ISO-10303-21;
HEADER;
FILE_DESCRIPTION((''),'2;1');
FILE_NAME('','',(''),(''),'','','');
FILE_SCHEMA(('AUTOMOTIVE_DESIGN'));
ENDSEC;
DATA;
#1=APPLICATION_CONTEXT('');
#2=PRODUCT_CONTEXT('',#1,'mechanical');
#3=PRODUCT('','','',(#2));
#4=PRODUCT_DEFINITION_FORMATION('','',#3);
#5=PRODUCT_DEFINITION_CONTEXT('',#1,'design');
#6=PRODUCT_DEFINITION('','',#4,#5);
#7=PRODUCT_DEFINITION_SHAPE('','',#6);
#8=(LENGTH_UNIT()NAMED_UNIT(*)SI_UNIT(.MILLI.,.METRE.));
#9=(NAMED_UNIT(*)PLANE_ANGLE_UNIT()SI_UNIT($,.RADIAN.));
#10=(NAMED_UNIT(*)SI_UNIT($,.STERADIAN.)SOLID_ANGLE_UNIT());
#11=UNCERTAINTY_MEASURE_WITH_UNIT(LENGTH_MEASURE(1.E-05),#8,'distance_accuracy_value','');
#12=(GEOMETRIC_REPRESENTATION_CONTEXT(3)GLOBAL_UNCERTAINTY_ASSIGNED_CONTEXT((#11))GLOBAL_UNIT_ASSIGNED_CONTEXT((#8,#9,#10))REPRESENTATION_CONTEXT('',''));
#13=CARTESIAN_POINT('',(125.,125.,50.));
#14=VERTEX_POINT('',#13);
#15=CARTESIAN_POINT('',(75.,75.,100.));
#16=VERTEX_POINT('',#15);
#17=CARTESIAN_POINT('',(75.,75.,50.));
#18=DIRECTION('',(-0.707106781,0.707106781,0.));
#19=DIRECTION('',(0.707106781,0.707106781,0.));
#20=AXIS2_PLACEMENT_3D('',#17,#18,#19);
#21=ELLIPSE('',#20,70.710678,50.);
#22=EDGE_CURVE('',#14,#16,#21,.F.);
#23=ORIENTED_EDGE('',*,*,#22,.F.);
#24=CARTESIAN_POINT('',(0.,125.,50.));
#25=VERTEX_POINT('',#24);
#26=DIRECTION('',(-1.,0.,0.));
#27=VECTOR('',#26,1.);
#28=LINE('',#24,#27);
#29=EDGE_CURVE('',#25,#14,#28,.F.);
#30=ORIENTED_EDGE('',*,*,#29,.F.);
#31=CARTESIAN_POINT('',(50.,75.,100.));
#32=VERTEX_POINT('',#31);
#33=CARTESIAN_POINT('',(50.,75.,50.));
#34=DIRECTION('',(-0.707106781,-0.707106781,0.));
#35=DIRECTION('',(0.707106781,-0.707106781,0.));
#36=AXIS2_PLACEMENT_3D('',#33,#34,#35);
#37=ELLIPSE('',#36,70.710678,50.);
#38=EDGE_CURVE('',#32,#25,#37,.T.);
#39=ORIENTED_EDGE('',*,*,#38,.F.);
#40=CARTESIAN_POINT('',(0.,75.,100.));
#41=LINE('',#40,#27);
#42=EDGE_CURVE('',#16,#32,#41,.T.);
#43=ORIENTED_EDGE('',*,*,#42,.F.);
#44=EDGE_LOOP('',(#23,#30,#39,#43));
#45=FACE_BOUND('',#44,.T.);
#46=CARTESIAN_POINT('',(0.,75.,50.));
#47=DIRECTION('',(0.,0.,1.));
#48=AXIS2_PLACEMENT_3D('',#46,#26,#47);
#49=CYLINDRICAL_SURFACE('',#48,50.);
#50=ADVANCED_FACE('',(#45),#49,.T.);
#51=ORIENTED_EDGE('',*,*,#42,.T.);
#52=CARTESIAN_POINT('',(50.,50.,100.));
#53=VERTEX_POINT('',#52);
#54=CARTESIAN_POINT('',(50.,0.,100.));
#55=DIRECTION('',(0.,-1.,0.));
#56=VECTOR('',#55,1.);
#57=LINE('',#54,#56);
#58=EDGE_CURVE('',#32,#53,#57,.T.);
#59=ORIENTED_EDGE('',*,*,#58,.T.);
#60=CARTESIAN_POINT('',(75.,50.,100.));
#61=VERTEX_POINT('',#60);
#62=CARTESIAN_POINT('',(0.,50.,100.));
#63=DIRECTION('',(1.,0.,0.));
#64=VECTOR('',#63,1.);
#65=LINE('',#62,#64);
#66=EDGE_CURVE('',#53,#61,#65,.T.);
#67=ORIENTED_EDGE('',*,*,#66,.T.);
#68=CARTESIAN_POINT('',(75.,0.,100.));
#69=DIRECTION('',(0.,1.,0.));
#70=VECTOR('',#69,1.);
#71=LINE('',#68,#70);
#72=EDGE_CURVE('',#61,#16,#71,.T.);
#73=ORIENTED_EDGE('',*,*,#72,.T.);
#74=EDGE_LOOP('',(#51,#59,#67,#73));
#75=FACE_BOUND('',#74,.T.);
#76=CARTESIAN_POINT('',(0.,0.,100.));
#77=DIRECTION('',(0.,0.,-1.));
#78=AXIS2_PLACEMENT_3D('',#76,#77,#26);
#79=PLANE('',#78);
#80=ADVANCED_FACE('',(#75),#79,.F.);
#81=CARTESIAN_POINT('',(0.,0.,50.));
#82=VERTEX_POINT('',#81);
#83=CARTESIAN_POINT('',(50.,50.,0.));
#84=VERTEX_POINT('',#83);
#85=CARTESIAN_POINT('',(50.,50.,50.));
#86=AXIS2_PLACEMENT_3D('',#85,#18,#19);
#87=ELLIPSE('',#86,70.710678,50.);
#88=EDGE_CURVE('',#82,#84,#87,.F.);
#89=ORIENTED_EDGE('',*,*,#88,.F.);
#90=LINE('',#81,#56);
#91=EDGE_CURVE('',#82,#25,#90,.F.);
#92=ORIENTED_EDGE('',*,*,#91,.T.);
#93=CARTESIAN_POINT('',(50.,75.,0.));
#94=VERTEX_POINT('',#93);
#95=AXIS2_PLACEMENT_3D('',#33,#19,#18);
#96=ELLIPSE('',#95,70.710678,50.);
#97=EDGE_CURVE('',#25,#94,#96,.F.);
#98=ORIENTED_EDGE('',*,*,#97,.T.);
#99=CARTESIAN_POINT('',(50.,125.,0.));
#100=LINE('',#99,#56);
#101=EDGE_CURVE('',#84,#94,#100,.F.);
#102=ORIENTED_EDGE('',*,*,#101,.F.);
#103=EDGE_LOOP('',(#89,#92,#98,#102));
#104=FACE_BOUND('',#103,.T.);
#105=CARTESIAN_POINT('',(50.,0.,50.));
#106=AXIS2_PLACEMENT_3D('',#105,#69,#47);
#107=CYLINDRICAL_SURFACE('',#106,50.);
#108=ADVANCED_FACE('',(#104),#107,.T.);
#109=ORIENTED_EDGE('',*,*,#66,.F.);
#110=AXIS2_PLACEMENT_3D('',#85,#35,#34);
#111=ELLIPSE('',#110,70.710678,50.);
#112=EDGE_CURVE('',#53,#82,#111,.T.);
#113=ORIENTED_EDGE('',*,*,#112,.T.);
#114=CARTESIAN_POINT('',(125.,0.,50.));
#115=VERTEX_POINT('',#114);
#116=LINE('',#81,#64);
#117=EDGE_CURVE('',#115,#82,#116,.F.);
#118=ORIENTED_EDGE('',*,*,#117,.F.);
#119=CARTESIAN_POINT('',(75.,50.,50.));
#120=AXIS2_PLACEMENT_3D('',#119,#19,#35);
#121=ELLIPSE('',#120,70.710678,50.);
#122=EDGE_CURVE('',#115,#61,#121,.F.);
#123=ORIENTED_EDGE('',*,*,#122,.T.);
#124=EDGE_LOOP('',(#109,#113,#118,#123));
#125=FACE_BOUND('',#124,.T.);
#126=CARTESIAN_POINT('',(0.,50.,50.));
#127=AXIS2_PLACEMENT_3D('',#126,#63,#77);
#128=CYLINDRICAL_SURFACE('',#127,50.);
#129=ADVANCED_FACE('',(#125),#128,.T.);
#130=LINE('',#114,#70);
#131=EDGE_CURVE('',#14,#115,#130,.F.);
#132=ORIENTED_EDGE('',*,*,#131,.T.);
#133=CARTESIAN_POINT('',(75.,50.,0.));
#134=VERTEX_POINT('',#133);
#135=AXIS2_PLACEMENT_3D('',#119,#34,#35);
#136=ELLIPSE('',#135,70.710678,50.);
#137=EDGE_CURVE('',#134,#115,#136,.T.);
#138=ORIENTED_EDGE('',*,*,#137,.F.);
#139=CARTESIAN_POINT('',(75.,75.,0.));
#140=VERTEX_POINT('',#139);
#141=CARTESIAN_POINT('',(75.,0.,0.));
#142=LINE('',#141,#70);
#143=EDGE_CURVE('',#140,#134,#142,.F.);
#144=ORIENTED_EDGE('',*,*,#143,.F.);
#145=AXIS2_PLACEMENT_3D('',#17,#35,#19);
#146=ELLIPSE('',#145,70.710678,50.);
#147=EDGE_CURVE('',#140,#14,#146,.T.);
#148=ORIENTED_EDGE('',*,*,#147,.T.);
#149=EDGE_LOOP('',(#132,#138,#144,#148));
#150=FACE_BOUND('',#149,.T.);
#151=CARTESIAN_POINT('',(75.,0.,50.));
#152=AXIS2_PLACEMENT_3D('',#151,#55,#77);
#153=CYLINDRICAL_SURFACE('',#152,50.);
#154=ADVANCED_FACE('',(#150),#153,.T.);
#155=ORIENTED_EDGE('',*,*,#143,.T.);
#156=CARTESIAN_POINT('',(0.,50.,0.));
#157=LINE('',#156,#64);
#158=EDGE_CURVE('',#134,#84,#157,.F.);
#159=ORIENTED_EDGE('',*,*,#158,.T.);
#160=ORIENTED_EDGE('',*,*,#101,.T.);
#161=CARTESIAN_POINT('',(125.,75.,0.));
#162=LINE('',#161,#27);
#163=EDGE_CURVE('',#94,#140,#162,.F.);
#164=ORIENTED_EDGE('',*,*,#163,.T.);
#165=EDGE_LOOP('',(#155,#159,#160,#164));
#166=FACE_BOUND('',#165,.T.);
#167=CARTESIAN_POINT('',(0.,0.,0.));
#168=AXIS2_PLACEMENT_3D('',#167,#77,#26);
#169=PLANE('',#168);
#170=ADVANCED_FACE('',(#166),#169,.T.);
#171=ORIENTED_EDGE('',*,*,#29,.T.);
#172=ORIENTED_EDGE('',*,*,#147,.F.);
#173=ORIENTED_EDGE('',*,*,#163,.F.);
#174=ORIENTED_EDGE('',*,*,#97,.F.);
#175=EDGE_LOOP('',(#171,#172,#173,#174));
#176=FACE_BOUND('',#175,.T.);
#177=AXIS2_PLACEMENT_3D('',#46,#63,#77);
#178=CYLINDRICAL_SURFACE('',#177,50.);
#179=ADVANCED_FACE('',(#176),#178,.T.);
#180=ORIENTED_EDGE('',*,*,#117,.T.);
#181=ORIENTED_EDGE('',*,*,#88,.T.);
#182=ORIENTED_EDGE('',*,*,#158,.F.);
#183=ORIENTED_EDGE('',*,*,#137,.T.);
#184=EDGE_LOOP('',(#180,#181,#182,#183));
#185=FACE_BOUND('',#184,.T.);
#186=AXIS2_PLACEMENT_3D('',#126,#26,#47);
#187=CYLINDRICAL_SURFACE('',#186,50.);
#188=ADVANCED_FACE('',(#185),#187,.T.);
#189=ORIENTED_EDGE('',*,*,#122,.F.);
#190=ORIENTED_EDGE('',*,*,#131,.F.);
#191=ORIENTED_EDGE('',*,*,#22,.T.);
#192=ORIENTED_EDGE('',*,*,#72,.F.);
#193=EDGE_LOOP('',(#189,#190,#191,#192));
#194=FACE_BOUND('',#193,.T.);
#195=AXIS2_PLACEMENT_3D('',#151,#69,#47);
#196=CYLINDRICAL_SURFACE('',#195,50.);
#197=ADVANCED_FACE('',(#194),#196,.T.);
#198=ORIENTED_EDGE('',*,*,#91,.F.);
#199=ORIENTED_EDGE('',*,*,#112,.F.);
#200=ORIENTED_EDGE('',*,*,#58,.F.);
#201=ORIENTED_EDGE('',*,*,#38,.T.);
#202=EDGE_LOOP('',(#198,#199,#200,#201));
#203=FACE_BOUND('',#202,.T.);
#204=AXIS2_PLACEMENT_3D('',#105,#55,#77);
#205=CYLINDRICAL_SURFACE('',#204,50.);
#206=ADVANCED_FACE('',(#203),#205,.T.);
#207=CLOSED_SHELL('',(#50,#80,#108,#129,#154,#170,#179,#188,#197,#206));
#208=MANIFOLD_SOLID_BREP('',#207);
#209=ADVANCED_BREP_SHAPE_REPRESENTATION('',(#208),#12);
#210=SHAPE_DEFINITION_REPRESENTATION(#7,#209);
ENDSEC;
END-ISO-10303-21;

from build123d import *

# Parameters (mm, degrees)
SKETCH1_W           = 125
SKETCH1_H           = 125
BOSS_EXTRUDE1_DEPTH = 100
FILLET1_R           = 50


with BuildPart() as part:
    # Sketch1 → Boss-Extrude1 (new body)
    with BuildSketch(Plane.XY):
        with Locations((62.5, 62.5)):
            Rectangle(SKETCH1_W, SKETCH1_H)
    extrude(amount=BOSS_EXTRUDE1_DEPTH)

    # Fillet1
    fillet1_edges = [part.edges().sort_by_distance(p)[0] for p in [
        (62.5, 0, 0),
        (125, 62.5, 0),
        (62.5, 125, 0),
        (0, 62.5, 0),
        (62.5, 125, 100),
        (125, 62.5, 100),
        (62.5, 0, 100),
        (0, 62.5, 100),
    ]]
    fillet(fillet1_edges, radius=FILLET1_R - 0.0001)  # a hair under: the kernel refuses the full size


solid = part.part
